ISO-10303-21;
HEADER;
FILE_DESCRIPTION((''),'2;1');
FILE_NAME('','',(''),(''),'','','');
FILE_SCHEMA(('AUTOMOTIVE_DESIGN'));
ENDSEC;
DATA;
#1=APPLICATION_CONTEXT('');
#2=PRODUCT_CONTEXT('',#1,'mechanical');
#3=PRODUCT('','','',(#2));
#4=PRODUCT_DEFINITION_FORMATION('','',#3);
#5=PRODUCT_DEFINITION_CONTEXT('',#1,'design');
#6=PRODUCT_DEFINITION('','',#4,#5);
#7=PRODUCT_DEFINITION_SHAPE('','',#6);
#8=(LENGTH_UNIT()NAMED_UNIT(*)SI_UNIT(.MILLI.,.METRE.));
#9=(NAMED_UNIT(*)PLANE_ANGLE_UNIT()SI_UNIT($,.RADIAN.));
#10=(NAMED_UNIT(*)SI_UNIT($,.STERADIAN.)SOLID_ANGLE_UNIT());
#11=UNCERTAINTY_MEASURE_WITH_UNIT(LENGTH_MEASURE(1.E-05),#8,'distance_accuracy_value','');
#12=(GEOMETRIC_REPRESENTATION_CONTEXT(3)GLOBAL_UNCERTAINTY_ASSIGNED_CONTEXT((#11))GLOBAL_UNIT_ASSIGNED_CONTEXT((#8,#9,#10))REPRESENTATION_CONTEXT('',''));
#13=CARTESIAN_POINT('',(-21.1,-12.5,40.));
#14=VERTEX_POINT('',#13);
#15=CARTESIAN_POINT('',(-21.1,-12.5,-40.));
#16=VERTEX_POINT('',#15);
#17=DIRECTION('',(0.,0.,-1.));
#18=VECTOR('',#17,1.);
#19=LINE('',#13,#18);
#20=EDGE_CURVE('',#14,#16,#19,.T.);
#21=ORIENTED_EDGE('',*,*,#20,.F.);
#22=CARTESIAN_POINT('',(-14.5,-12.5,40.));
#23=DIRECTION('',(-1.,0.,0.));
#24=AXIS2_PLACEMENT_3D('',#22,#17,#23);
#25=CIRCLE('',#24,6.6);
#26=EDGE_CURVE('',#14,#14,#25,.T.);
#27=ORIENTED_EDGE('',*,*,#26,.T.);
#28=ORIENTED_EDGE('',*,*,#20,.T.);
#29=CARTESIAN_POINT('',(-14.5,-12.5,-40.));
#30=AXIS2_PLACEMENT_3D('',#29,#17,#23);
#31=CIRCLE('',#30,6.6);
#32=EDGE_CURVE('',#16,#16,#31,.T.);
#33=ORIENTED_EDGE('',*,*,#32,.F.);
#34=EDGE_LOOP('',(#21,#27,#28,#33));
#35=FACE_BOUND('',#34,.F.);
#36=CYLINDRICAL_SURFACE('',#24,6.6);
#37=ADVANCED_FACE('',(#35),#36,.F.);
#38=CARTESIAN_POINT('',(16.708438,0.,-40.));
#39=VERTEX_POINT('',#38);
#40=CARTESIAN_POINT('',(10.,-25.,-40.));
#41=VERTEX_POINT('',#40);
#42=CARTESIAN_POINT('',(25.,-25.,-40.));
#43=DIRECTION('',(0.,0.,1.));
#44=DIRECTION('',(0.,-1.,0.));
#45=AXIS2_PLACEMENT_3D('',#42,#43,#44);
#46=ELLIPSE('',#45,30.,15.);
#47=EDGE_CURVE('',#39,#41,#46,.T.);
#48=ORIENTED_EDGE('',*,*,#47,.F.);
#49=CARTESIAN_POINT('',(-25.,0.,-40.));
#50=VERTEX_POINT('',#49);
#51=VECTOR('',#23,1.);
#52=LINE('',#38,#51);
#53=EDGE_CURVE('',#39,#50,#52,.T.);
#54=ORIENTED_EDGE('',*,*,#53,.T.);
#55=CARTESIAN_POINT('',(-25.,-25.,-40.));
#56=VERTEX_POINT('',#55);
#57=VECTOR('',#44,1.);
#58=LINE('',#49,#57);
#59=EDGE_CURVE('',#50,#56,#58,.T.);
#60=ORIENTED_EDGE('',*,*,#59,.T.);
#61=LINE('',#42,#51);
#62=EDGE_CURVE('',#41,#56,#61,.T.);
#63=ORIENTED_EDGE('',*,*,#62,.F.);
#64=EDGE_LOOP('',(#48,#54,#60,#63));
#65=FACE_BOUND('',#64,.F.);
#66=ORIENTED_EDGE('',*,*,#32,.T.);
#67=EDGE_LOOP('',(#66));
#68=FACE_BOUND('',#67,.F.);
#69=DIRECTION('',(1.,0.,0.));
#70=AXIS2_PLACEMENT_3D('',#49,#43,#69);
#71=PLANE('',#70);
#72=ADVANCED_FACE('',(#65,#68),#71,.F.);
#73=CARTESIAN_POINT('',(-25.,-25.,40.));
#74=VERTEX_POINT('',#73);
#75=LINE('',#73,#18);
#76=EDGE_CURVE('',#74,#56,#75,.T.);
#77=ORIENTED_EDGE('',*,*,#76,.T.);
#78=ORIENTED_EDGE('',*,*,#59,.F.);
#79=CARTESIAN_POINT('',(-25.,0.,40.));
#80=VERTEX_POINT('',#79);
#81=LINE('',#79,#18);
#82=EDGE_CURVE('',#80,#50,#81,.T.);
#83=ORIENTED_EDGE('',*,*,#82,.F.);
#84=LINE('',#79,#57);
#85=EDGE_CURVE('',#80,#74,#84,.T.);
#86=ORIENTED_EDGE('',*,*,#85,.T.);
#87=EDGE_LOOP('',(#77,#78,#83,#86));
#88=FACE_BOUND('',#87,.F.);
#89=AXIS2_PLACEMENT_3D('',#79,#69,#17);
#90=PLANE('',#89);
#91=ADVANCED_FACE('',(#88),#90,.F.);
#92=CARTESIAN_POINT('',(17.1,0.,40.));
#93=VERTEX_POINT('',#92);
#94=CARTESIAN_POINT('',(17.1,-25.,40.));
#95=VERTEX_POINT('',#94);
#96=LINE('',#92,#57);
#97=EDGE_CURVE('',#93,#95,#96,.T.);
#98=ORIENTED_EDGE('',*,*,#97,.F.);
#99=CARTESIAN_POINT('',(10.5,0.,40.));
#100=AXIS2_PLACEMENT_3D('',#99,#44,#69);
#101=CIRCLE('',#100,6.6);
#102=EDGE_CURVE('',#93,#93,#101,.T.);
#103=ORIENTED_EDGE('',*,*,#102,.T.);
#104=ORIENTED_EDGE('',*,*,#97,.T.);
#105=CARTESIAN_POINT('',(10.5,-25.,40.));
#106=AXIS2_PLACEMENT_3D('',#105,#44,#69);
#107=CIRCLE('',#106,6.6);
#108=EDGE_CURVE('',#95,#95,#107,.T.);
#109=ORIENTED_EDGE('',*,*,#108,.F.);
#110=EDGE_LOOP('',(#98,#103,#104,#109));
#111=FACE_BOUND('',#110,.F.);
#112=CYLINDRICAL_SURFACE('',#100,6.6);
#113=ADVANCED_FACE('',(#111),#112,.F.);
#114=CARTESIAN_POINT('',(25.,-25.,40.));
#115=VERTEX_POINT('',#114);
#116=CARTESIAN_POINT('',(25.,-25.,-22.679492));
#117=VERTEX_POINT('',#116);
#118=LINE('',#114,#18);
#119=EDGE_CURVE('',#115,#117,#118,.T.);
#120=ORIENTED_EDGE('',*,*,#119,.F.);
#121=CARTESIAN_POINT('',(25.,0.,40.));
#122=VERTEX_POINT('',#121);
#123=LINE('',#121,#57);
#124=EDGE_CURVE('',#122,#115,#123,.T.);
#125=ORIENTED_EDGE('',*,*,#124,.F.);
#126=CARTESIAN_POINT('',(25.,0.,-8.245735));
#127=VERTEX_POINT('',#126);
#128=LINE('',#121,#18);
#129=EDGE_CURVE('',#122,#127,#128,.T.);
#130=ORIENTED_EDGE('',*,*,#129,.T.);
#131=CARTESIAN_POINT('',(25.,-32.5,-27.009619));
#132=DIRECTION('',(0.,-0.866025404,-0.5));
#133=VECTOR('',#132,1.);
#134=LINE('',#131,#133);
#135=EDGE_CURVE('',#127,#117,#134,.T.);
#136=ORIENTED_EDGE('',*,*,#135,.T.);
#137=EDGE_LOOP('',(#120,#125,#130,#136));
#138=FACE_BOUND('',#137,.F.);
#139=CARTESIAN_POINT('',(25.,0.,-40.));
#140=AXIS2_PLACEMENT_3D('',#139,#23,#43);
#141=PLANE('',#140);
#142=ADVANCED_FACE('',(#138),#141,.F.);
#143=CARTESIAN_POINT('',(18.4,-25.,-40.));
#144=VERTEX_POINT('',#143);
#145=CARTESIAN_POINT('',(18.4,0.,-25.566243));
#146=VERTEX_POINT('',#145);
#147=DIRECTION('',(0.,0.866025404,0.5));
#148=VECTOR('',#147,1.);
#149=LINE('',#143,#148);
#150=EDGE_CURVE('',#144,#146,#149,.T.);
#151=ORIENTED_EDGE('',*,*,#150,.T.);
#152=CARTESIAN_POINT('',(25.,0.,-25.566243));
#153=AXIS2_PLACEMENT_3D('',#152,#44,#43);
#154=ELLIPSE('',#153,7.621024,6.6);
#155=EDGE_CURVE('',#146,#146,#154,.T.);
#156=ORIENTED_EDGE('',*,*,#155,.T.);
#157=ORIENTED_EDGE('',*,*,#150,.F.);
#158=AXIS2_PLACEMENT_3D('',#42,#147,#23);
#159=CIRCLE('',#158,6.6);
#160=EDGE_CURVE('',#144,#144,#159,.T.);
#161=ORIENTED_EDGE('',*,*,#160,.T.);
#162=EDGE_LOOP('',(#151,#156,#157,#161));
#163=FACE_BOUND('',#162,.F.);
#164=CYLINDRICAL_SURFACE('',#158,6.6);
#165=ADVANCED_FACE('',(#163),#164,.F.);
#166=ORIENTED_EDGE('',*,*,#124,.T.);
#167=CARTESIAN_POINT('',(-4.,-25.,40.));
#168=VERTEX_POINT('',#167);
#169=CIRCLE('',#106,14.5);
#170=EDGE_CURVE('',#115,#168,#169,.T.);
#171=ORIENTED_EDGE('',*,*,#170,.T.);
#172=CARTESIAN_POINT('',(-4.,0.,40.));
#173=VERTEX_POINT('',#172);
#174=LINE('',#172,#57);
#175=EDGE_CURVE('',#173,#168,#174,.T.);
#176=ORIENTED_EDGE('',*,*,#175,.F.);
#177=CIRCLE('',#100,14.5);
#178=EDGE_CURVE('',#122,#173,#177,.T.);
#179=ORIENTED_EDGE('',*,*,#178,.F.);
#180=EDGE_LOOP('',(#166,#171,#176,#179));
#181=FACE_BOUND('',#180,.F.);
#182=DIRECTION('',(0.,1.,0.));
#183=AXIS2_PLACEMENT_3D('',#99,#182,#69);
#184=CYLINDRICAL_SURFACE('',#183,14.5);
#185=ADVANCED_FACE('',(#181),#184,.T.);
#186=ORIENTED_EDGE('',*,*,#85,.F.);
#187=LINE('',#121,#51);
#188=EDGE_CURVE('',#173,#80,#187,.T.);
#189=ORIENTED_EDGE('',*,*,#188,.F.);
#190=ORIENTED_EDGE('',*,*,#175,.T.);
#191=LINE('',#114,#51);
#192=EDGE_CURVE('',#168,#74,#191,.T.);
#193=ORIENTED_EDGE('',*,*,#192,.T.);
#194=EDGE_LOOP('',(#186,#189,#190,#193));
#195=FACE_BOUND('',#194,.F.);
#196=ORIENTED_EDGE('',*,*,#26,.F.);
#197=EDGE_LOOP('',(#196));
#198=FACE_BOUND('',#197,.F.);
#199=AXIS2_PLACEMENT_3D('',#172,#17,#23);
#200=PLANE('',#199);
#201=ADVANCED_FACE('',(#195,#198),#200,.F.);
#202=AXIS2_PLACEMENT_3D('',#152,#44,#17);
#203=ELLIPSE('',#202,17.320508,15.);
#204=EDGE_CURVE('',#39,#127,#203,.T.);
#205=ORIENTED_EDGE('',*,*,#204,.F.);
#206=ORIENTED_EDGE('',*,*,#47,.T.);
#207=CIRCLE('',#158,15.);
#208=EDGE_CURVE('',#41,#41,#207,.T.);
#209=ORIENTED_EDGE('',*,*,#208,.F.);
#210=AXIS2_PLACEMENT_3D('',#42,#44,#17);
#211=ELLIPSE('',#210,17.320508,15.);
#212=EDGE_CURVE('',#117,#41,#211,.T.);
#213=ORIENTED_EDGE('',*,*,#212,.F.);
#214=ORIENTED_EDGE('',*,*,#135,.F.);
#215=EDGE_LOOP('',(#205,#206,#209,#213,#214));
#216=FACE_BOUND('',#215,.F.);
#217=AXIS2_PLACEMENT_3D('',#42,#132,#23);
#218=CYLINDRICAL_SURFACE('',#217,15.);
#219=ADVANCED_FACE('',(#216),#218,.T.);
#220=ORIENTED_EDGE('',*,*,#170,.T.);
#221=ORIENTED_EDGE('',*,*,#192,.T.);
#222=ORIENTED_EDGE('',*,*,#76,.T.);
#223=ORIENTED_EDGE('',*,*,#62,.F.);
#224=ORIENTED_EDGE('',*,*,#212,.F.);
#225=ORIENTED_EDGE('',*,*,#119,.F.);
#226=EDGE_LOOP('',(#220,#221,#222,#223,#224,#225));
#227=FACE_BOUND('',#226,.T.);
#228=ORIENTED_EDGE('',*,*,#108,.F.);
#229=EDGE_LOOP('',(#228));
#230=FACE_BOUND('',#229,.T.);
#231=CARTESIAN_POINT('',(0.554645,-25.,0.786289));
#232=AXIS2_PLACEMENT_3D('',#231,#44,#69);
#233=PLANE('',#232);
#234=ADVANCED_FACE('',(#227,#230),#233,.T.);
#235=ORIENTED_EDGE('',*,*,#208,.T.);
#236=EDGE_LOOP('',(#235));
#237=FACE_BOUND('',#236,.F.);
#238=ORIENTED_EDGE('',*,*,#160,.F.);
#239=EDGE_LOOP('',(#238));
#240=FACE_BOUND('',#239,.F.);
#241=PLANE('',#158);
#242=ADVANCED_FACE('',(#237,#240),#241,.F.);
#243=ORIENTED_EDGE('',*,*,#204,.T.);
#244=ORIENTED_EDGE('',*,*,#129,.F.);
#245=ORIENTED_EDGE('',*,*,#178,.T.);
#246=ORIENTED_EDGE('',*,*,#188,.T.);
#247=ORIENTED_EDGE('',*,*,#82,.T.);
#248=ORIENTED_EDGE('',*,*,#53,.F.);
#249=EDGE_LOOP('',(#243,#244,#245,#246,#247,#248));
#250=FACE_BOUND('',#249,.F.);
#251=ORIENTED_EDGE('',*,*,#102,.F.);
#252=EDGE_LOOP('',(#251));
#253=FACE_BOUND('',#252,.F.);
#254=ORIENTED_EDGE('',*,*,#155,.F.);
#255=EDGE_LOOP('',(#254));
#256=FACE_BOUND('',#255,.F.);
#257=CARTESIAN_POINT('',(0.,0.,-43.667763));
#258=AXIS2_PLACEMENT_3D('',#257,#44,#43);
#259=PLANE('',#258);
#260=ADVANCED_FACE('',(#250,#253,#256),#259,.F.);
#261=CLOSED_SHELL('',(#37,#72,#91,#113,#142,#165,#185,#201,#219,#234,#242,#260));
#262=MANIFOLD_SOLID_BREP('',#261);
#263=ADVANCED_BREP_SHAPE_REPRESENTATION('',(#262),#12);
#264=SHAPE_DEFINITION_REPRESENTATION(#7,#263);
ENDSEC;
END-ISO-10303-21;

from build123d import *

# Parameters (mm, degrees)
F1_DEPTH        = 25
F3_D            = 13.2
F3_CBORE_D      = 19.25
F3_CBORE_DEPTH  = 0
F4_W            = 24.2927655578
F4_H            = 50
F5_DEPTH        = 60
F7_D            = 13.2
F7_CBORE_D      = 19.25
F7_CBORE_DEPTH  = 0
F9_R            = 15
F10_DEPTH       = 52
F12_D           = 13.2
F12_CBORE_D     = 19.25
F12_CBORE_DEPTH = 0
F13_W           = 29.7532882541
F13_H           = 56.5460538492
F14_DEPTH       = 50


with BuildPart() as f1:
    # F0 (on Front) → F1 (new body)
    with BuildSketch(Plane.XZ):
        with BuildLine():
            Line((-25, -40), (25, -40))
            Line((25, -40), (25, 40))
            ThreePointArc((25, 40), (10.5, 25.5), (-4, 40))
            Line((-4, 40), (-25, 40))
            Line((-25, 40), (-25, -40))
        make_face()
        with BuildLine():
            ThreePointArc((-4, 40), (10.5, 25.5), (25, 40))
            Line((25, 40), (-4, 40))
        make_face()
        with BuildLine():
            Line((-4, 40), (25, 40))
            ThreePointArc((25, 40), (10.5, 54.5), (-4, 40))
        make_face()
    extrude(amount=F1_DEPTH)

    # F3 (through all)
    with Locations(Plane(origin=(0, 0, 0), x_dir=(-1, 0, 0), z_dir=(0, 1, 0))):
        with Locations((-10.5, 40)):
            CounterBoreHole(F3_D / 2, F3_CBORE_D / 2, F3_CBORE_DEPTH)

    # F4 (on Right) → F5 (cut)
    with BuildSketch(Plane.YZ):
        with Locations((-37.1463827789, -15)):
            Rectangle(F4_W, F4_H)
    extrude(amount=F5_DEPTH, mode=Mode.SUBTRACT)

    # F7 (through all)
    with Locations(Plane.XY.offset(40)):
        with Locations((-14.5, -12.5)):
            CounterBoreHole(F7_D / 2, F7_CBORE_D / 2, F7_CBORE_DEPTH)

    # F9 (on face) → F10 (join)
    with BuildSketch(Plane(origin=(0, -36.0705080757, -20.8253175473), x_dir=(-1, 0, 0), z_dir=(0, 0.8660254038, 0.5))):
        with Locations((-25, -22.1410161514)):
            Circle(F9_R)
    extrude(amount=F10_DEPTH)

    # F12 (through all)
    with Locations(Plane(origin=(0, -36.0705080757, -20.8253175473), x_dir=(1, 0, 0), z_dir=(0, -0.8660254038, -0.5))):
        with Locations((25, -22.1410161514)):
            CounterBoreHole(F12_D / 2, F12_CBORE_D / 2, F12_CBORE_DEPTH)

    # F13 (on Right) → F14 (cut)
    with BuildSketch(Plane.YZ):
        with Locations((14.8766441271, -15.394736547)):
            Rectangle(F13_W, F13_H)
    extrude(amount=F14_DEPTH, mode=Mode.SUBTRACT)


solid = f1.part
